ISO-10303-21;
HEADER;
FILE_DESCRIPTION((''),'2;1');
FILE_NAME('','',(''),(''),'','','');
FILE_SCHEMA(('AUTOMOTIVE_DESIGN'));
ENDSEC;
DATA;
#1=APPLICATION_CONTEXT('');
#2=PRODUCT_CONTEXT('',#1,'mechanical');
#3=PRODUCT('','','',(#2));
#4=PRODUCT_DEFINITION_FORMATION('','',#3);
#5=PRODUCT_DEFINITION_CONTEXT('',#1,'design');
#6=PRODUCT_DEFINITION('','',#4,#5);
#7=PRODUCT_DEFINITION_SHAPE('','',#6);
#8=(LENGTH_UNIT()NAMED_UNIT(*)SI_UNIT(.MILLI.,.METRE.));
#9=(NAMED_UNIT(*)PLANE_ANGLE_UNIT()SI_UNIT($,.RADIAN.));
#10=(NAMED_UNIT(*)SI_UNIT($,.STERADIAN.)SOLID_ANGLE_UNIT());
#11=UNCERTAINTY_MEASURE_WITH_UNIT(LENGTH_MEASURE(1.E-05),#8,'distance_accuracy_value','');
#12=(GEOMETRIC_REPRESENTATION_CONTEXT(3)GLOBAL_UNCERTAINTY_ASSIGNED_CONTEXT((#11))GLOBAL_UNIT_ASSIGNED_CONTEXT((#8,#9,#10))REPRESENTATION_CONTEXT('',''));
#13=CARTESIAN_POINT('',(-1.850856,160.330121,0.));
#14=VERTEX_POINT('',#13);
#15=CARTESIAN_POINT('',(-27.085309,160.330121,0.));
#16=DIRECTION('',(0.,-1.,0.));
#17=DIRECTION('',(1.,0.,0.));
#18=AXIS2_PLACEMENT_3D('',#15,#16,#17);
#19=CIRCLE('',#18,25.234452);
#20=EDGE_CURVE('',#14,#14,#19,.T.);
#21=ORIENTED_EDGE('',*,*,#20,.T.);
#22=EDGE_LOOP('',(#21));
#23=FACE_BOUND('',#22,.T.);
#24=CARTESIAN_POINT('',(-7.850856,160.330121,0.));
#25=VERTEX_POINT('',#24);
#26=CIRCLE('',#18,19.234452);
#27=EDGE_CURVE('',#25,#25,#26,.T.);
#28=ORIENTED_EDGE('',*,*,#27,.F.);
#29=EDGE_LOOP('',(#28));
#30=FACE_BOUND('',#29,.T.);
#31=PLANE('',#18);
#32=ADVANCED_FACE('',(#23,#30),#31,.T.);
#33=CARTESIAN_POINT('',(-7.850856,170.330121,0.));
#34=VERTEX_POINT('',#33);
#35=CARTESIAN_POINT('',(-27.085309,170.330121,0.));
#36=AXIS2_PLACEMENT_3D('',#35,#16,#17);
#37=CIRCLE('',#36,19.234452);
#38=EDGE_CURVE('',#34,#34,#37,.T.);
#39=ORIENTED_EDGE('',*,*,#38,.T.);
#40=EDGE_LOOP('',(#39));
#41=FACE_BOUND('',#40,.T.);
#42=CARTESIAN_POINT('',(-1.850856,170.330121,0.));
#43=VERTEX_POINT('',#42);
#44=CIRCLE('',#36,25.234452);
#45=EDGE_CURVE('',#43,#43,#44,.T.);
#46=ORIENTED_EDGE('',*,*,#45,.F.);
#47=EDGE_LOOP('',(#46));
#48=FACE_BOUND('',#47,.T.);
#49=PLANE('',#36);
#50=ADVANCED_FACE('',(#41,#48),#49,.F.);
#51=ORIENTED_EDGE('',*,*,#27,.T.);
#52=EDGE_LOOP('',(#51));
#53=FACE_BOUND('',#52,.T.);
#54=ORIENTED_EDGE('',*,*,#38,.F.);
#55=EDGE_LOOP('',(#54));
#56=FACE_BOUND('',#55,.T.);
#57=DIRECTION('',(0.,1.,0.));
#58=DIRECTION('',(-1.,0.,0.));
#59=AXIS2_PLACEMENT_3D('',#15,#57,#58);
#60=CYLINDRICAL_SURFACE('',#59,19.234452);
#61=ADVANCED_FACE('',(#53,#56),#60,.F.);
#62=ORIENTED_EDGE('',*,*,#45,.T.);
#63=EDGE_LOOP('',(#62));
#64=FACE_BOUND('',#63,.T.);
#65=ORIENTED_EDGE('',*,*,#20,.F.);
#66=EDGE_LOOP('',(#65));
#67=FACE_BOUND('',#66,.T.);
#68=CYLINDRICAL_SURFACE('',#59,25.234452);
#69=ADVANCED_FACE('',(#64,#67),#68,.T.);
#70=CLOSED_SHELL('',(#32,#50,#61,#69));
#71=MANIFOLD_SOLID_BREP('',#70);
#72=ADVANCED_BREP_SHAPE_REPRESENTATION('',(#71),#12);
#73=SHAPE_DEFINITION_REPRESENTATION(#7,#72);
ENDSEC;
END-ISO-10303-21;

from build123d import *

# Parameters (mm, degrees)
BOSS_EXTRUDE1_OUTLINE_R   = 25.234452235
BOSS_EXTRUDE1_OUTLINE_R_2 = 19.234452235
BOSS_EXTRUDE1_DEPTH       = 10


# Read off the part's stored shape, not the designer's step: Boss-Extrude1
with BuildPart() as part:
    # Boss-Extrude1 outline → Boss-Extrude1 (new body)
    with BuildSketch(Plane.XZ.offset(-170.330120992)):
        with Locations((-27.085308561, 0)):
            Circle(BOSS_EXTRUDE1_OUTLINE_R)
        with Locations((-27.085308561, 0)):
            Circle(BOSS_EXTRUDE1_OUTLINE_R_2, mode=Mode.SUBTRACT)
    extrude(amount=BOSS_EXTRUDE1_DEPTH)


solid = part.part
